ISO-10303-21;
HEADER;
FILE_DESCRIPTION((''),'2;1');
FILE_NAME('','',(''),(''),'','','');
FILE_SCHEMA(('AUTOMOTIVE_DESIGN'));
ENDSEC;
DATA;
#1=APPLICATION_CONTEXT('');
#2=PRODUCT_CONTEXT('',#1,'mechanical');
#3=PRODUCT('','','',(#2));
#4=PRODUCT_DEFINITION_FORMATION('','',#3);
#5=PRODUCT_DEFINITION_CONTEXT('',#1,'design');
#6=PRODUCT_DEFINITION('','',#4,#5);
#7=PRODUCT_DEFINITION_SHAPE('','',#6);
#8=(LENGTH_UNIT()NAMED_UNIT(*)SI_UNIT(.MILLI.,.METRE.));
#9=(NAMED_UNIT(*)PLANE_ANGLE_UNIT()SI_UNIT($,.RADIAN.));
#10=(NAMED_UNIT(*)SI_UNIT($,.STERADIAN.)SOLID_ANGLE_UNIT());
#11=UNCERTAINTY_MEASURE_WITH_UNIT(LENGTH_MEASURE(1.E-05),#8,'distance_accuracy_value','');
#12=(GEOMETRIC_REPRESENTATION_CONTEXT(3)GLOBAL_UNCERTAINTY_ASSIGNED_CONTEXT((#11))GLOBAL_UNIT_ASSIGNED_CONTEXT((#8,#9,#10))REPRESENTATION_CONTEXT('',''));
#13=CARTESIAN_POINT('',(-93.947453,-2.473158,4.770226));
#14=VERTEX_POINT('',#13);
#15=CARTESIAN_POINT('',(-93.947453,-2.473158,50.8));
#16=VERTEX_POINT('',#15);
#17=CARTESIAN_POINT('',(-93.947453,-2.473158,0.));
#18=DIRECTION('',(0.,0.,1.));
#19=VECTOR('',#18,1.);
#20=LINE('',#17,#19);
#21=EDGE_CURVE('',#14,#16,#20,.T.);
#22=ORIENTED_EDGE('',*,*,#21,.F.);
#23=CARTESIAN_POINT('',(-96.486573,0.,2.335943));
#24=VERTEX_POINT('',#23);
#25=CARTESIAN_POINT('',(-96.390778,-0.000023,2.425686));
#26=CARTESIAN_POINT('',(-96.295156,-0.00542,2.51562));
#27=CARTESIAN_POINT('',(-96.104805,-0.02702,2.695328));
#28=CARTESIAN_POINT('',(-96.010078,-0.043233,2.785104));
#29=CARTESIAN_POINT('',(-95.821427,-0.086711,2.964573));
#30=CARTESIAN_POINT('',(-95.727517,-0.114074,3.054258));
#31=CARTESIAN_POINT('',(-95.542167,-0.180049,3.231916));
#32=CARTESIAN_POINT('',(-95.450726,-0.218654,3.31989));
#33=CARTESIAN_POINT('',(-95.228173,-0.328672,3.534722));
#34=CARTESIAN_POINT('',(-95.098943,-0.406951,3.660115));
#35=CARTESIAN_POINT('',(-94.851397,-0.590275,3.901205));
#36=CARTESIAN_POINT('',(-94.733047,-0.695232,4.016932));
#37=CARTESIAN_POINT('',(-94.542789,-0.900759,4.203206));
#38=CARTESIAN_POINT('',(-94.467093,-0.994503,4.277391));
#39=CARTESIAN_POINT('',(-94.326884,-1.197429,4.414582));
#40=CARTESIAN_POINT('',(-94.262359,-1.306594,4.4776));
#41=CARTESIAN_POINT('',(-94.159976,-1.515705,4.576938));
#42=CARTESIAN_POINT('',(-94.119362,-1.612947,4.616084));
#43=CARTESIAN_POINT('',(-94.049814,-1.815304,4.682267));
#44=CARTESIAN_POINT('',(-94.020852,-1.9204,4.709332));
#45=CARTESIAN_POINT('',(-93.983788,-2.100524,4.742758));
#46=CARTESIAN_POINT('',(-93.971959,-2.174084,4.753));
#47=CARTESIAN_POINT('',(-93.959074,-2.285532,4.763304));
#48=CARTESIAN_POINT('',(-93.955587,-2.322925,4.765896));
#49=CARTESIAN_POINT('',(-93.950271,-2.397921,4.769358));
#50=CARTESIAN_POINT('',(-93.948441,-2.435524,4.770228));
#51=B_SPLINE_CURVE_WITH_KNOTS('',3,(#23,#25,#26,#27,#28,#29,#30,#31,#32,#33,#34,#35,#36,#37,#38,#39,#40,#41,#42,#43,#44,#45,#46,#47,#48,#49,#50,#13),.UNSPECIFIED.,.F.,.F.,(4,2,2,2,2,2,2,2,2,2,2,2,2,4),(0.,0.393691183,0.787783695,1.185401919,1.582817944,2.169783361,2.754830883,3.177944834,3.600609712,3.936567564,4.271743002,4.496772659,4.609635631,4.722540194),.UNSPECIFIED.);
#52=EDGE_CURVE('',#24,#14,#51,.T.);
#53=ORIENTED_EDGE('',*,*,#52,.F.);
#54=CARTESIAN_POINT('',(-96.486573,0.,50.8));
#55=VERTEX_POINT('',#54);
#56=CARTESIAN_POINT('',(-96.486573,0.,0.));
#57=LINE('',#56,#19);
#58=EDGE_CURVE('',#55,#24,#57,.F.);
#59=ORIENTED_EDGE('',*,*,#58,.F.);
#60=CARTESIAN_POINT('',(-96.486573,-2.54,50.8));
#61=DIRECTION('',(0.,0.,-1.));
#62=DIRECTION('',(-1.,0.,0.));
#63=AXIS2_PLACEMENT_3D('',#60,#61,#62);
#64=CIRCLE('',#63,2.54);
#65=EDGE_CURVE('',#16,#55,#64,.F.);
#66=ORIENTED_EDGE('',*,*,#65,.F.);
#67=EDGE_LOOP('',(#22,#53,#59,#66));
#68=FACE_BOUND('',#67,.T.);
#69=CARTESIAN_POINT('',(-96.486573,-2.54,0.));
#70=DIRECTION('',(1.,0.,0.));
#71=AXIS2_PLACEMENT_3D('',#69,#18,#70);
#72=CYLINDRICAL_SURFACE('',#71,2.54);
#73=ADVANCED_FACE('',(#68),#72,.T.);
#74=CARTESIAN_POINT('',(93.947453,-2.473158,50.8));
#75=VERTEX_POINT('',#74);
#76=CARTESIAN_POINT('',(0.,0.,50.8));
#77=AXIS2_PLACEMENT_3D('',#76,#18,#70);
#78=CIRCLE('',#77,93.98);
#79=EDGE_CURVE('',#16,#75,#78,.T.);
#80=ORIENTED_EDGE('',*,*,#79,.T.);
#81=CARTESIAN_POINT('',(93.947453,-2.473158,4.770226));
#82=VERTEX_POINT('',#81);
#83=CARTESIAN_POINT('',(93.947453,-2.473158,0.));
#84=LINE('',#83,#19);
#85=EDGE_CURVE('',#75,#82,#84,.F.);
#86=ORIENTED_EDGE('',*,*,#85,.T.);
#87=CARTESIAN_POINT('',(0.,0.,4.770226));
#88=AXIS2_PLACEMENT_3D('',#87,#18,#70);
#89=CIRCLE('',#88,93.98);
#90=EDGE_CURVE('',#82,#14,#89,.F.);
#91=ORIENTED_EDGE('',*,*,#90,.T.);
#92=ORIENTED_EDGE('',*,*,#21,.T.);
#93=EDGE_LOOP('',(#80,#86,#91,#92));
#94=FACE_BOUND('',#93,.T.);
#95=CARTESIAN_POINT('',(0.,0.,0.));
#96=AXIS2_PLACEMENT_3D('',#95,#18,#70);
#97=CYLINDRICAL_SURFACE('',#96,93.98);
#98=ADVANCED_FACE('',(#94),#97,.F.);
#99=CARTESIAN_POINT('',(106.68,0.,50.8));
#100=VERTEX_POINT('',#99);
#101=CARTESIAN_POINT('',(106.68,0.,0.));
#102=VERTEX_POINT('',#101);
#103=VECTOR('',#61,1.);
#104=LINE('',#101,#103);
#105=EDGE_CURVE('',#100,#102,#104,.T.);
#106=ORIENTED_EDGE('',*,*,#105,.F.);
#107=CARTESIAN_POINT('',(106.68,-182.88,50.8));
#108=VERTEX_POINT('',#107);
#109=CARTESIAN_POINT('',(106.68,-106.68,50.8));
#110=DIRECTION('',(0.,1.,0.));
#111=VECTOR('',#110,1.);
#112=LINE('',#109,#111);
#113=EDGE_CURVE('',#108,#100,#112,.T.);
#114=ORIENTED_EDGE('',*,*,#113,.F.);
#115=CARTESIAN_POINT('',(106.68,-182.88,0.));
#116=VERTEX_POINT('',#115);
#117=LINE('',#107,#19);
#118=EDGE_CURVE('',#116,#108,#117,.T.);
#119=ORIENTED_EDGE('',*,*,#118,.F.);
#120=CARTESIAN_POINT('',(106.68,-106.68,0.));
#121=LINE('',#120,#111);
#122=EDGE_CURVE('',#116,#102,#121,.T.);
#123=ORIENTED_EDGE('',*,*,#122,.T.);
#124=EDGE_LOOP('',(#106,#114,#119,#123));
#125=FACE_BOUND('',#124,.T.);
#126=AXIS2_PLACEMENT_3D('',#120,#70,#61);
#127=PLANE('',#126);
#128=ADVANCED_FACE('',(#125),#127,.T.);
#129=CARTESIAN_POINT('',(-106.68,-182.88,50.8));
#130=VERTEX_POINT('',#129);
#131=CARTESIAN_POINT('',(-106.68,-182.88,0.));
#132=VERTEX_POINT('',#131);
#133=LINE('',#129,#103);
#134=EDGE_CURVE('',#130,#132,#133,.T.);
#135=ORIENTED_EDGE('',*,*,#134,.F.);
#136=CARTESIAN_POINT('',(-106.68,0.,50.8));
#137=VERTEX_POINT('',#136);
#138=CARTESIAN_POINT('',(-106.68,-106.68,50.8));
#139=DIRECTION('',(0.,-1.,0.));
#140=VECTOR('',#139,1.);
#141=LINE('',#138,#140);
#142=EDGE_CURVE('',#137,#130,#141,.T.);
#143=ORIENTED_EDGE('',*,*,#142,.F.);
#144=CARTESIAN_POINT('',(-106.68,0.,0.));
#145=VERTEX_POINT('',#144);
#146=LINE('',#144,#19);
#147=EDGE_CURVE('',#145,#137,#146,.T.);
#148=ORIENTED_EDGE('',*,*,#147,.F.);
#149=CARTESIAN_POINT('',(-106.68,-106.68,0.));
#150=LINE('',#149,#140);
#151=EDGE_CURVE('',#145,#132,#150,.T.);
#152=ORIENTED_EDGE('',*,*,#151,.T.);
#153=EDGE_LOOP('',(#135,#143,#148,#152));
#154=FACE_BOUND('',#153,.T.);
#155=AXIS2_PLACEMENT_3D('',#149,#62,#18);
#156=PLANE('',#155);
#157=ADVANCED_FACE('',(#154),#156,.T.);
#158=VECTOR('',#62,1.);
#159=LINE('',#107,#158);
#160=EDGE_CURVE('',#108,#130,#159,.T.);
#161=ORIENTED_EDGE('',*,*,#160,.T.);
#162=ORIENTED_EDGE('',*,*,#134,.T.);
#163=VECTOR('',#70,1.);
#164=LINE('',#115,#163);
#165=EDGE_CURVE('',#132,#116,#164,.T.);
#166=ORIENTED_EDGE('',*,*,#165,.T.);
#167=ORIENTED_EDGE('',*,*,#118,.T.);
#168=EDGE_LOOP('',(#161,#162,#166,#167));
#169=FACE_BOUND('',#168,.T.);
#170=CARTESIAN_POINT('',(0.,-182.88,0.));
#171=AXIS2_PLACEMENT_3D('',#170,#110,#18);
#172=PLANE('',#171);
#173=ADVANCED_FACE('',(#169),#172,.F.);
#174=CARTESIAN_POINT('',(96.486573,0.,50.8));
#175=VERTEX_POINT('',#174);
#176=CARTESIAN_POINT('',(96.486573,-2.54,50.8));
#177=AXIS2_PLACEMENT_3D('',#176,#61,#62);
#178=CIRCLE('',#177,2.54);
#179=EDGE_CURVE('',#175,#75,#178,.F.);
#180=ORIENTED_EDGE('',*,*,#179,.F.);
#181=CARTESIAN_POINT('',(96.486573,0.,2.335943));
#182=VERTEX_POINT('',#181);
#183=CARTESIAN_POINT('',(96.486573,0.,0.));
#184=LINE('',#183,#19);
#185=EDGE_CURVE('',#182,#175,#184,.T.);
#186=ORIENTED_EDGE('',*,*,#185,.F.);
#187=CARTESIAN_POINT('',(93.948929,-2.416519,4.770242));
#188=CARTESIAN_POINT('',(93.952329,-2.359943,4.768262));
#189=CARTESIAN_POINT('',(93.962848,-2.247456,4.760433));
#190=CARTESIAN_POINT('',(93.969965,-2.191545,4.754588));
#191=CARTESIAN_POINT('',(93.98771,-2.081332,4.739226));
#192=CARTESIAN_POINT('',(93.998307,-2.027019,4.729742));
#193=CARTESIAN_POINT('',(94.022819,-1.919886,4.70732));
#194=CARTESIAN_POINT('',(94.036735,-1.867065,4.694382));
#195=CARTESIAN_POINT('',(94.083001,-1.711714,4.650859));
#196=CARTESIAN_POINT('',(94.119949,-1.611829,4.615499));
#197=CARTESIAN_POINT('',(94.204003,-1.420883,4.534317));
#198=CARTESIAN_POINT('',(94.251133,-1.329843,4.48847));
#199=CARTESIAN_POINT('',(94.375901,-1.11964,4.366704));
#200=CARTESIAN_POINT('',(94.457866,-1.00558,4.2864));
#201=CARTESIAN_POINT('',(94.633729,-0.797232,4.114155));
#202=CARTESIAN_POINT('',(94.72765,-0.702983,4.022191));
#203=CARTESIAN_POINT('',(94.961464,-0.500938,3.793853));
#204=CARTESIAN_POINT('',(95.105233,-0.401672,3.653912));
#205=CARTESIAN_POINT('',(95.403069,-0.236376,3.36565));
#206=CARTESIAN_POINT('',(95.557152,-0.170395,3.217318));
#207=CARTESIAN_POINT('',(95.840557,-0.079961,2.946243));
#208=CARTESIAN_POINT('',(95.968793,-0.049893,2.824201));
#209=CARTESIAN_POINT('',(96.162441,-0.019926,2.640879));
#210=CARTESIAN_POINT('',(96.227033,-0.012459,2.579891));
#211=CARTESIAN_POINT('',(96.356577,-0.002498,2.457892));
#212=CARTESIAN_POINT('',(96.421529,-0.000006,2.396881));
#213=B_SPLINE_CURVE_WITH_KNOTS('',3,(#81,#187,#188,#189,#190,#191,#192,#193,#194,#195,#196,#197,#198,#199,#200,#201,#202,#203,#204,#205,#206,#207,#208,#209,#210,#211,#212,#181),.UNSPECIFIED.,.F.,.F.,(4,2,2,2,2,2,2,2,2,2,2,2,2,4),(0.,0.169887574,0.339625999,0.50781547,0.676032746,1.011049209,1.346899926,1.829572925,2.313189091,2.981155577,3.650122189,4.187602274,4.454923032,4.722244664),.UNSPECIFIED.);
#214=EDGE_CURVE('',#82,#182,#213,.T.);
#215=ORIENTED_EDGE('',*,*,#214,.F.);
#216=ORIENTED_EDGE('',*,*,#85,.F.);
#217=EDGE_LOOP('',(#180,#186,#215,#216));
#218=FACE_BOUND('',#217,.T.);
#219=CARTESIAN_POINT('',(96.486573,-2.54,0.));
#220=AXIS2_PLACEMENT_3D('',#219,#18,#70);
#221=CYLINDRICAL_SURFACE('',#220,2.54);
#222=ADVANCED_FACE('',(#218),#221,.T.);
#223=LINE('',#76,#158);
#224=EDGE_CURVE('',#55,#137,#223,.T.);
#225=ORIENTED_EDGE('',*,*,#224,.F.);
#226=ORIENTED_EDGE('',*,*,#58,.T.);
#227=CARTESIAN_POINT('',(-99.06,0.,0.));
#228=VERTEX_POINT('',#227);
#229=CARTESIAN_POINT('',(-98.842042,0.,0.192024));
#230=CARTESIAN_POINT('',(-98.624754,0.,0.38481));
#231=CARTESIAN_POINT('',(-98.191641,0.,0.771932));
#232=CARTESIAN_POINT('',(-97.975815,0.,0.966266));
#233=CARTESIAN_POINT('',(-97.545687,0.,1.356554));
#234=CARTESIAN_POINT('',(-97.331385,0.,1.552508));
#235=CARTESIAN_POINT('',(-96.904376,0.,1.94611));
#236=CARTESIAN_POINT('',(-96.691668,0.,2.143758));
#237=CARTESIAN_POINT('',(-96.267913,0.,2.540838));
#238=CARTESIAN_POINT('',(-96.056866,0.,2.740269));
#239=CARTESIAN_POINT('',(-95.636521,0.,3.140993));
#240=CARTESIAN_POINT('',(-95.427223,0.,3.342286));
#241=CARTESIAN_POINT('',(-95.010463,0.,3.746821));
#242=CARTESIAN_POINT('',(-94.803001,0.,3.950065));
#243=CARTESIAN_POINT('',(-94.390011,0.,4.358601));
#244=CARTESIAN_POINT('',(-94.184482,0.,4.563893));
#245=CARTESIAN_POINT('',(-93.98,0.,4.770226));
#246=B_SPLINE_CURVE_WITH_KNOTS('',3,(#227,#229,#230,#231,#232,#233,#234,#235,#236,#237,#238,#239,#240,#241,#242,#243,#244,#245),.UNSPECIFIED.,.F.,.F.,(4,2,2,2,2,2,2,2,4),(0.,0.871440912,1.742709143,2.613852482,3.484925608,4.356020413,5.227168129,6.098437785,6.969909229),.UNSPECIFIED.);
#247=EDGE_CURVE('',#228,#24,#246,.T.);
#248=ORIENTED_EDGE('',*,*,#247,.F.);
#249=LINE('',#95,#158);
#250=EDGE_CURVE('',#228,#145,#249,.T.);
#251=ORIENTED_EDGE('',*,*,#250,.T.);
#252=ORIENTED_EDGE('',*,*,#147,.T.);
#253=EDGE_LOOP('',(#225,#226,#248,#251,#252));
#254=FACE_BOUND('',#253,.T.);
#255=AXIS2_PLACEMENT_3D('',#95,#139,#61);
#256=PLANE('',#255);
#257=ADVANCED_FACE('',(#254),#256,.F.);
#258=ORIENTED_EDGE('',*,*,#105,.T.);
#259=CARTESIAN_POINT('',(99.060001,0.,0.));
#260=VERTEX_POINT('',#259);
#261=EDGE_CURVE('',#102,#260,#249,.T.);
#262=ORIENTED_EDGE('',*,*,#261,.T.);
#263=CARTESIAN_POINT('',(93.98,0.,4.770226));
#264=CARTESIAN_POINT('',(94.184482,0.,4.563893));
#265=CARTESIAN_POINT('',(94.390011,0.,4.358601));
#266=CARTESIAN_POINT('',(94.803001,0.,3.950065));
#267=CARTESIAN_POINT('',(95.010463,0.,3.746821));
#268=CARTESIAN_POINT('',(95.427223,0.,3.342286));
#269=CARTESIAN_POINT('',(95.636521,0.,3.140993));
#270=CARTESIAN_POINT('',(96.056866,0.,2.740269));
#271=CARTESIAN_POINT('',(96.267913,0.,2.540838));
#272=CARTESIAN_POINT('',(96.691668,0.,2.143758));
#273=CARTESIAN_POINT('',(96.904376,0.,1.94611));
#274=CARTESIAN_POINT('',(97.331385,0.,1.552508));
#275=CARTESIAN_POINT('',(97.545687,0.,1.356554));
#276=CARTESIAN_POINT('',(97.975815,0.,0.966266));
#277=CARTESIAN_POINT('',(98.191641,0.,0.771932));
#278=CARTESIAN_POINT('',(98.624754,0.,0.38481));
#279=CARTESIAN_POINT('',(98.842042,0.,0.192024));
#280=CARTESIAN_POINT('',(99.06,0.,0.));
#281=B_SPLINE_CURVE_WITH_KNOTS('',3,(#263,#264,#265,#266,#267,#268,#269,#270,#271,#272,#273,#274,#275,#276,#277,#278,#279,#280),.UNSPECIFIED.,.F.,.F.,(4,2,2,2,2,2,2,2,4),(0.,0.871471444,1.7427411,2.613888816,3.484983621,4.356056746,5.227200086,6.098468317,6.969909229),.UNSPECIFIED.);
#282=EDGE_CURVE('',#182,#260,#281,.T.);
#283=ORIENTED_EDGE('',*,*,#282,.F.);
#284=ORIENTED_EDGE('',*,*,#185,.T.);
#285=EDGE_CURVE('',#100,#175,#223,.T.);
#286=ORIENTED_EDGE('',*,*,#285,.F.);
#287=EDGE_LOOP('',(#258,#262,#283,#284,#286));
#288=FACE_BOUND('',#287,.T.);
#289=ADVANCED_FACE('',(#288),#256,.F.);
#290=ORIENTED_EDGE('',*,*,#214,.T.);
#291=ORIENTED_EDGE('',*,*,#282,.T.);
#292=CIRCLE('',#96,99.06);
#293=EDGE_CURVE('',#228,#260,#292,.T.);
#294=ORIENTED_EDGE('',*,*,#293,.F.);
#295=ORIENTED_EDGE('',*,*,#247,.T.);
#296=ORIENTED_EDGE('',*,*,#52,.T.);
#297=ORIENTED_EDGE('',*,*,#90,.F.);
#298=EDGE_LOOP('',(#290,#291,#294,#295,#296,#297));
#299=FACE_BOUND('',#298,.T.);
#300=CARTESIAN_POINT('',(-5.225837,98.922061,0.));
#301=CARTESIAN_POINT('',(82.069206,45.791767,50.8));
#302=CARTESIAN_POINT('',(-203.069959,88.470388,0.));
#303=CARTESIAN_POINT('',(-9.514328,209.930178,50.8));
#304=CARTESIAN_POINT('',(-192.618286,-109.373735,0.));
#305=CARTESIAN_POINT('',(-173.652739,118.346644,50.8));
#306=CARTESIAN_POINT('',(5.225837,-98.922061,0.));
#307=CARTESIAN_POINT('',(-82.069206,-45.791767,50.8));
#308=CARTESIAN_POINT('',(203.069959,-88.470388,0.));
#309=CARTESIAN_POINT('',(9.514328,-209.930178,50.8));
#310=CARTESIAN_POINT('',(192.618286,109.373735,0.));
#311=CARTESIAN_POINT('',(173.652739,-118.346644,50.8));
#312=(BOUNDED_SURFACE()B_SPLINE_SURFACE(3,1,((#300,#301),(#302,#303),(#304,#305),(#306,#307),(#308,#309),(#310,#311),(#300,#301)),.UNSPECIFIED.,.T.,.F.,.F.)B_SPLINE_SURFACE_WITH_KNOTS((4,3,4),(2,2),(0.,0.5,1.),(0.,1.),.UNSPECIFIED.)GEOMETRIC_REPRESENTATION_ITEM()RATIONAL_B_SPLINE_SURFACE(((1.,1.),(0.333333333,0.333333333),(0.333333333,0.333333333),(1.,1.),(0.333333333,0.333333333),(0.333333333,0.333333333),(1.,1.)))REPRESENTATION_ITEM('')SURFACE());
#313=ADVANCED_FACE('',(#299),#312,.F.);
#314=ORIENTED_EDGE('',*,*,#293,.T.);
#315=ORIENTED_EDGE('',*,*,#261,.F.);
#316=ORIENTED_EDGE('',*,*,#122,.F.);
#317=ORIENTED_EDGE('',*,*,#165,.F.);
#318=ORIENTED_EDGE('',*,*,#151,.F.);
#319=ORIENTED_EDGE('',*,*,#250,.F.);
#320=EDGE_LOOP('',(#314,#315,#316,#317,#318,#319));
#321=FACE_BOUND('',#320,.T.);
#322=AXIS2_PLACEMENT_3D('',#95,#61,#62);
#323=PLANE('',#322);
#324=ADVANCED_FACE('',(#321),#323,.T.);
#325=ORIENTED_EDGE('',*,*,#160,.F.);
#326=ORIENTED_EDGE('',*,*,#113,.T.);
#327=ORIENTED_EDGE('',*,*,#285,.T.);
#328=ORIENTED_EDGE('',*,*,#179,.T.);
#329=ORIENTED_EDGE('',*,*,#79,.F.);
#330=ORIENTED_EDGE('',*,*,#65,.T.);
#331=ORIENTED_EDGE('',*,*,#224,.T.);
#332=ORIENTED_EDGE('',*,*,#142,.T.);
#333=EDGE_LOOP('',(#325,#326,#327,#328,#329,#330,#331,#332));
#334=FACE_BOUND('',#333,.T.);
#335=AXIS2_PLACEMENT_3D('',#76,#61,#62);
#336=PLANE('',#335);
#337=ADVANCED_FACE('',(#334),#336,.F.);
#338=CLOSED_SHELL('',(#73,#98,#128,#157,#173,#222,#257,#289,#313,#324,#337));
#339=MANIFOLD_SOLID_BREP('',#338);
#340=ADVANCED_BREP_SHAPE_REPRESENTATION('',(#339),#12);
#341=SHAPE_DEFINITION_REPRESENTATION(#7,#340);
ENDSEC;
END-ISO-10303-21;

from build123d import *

# Parameters (mm, degrees)
SKETCH2_W           = 213.36
SKETCH2_H           = 213.36
SKETCH2_R           = 93.98
BOSS_EXTRUDE1_DEPTH = 50.8
SKETCH4_W           = 431.498092941
SKETCH4_H           = 427.351859682
CUT_EXTRUDE1_DEPTH  = 106.68
FILLET1_R           = 2.54
SKETCH6_W           = 213.36
SKETCH6_H           = 50.8
BOSS_EXTRUDE3_DEPTH = 76.2


with BuildPart() as part:
    # Sketch2 → Boss-Extrude1 (new body)
    with BuildSketch(Plane.XY.offset(50.8)):
        Rectangle(SKETCH2_W, SKETCH2_H)
        Circle(SKETCH2_R, mode=Mode.SUBTRACT)
    extrude(amount=-BOSS_EXTRUDE1_DEPTH)

    # Cut-Loft1: read off the stored shape, not the designer's step
    # Cut-Loft1: loft between two sections, ruled curve by curve
    cut_loft1_from = [
        Edge.make_bspline([(-5.225836659, 98.922061398, 0), (-203.069959455, 88.47038808, 0), (-192.618286137, -109.373734716, 0), (5.225836659, -98.922061398, 0), (203.069959455, -88.47038808, 0), (192.618286137, 109.373734716, 0), (-5.225836659, 98.922061398, 0)], [0, 0, 0, 0, 0.5, 0.5, 0.5, 1, 1, 1, 1], 3, [1, 0.333333333, 0.333333333, 1, 0.333333333, 0.333333333, 1]),
    ]
    cut_loft1_to = [
        Edge.make_bspline([(82.069205503, 45.791766816, 50.8), (-9.514328128, 209.930177822, 50.8), (-173.652739134, 118.34664419, 50.8), (-82.069205503, -45.791766816, 50.8), (9.514328128, -209.930177822, 50.8), (173.652739134, -118.34664419, 50.8), (82.069205503, 45.791766816, 50.8)], [0, 0, 0, 0, 0.5, 0.5, 0.5, 1, 1, 1, 1], 3, [1, 0.333333333, 0.333333333, 1, 0.333333333, 0.333333333, 1]),
    ]
    cut_loft1 = Solid(Shell([*[Face.make_surface_from_curves(cut_loft1_from[k], cut_loft1_to[k]) for k in range(1)], Face(Wire(cut_loft1_from)), Face(Wire(cut_loft1_to))]))
    add(cut_loft1, mode=Mode.SUBTRACT)

    # Sketch4 → Cut-Extrude1 (cut)
    with BuildSketch(Plane(origin=(0, 106.68, 0), x_dir=(1, 0, 0), z_dir=(0, 1, 0))):
        with Locations((-43.743226098, -53.764043901)):
            Rectangle(SKETCH4_W, SKETCH4_H)
    extrude(amount=-CUT_EXTRUDE1_DEPTH, mode=Mode.SUBTRACT)

    # Fillet1
    fillet1_edges = [part.edges().sort_by_distance(p)[0] for p in [
        (93.98, 0, 27.785112978),
        (-93.98, 0, 27.785112678),
    ]]
    fillet(fillet1_edges, radius=FILLET1_R)

    # Sketch6 → Boss-Extrude3 (add)
    with BuildSketch(Plane(origin=(0, -106.68, 0), x_dir=(-1, 0, 0), z_dir=(0, -1, 0))):
        with Locations((0, -25.4)):
            Rectangle(SKETCH6_W, SKETCH6_H)
    extrude(amount=BOSS_EXTRUDE3_DEPTH)


solid = part.part
